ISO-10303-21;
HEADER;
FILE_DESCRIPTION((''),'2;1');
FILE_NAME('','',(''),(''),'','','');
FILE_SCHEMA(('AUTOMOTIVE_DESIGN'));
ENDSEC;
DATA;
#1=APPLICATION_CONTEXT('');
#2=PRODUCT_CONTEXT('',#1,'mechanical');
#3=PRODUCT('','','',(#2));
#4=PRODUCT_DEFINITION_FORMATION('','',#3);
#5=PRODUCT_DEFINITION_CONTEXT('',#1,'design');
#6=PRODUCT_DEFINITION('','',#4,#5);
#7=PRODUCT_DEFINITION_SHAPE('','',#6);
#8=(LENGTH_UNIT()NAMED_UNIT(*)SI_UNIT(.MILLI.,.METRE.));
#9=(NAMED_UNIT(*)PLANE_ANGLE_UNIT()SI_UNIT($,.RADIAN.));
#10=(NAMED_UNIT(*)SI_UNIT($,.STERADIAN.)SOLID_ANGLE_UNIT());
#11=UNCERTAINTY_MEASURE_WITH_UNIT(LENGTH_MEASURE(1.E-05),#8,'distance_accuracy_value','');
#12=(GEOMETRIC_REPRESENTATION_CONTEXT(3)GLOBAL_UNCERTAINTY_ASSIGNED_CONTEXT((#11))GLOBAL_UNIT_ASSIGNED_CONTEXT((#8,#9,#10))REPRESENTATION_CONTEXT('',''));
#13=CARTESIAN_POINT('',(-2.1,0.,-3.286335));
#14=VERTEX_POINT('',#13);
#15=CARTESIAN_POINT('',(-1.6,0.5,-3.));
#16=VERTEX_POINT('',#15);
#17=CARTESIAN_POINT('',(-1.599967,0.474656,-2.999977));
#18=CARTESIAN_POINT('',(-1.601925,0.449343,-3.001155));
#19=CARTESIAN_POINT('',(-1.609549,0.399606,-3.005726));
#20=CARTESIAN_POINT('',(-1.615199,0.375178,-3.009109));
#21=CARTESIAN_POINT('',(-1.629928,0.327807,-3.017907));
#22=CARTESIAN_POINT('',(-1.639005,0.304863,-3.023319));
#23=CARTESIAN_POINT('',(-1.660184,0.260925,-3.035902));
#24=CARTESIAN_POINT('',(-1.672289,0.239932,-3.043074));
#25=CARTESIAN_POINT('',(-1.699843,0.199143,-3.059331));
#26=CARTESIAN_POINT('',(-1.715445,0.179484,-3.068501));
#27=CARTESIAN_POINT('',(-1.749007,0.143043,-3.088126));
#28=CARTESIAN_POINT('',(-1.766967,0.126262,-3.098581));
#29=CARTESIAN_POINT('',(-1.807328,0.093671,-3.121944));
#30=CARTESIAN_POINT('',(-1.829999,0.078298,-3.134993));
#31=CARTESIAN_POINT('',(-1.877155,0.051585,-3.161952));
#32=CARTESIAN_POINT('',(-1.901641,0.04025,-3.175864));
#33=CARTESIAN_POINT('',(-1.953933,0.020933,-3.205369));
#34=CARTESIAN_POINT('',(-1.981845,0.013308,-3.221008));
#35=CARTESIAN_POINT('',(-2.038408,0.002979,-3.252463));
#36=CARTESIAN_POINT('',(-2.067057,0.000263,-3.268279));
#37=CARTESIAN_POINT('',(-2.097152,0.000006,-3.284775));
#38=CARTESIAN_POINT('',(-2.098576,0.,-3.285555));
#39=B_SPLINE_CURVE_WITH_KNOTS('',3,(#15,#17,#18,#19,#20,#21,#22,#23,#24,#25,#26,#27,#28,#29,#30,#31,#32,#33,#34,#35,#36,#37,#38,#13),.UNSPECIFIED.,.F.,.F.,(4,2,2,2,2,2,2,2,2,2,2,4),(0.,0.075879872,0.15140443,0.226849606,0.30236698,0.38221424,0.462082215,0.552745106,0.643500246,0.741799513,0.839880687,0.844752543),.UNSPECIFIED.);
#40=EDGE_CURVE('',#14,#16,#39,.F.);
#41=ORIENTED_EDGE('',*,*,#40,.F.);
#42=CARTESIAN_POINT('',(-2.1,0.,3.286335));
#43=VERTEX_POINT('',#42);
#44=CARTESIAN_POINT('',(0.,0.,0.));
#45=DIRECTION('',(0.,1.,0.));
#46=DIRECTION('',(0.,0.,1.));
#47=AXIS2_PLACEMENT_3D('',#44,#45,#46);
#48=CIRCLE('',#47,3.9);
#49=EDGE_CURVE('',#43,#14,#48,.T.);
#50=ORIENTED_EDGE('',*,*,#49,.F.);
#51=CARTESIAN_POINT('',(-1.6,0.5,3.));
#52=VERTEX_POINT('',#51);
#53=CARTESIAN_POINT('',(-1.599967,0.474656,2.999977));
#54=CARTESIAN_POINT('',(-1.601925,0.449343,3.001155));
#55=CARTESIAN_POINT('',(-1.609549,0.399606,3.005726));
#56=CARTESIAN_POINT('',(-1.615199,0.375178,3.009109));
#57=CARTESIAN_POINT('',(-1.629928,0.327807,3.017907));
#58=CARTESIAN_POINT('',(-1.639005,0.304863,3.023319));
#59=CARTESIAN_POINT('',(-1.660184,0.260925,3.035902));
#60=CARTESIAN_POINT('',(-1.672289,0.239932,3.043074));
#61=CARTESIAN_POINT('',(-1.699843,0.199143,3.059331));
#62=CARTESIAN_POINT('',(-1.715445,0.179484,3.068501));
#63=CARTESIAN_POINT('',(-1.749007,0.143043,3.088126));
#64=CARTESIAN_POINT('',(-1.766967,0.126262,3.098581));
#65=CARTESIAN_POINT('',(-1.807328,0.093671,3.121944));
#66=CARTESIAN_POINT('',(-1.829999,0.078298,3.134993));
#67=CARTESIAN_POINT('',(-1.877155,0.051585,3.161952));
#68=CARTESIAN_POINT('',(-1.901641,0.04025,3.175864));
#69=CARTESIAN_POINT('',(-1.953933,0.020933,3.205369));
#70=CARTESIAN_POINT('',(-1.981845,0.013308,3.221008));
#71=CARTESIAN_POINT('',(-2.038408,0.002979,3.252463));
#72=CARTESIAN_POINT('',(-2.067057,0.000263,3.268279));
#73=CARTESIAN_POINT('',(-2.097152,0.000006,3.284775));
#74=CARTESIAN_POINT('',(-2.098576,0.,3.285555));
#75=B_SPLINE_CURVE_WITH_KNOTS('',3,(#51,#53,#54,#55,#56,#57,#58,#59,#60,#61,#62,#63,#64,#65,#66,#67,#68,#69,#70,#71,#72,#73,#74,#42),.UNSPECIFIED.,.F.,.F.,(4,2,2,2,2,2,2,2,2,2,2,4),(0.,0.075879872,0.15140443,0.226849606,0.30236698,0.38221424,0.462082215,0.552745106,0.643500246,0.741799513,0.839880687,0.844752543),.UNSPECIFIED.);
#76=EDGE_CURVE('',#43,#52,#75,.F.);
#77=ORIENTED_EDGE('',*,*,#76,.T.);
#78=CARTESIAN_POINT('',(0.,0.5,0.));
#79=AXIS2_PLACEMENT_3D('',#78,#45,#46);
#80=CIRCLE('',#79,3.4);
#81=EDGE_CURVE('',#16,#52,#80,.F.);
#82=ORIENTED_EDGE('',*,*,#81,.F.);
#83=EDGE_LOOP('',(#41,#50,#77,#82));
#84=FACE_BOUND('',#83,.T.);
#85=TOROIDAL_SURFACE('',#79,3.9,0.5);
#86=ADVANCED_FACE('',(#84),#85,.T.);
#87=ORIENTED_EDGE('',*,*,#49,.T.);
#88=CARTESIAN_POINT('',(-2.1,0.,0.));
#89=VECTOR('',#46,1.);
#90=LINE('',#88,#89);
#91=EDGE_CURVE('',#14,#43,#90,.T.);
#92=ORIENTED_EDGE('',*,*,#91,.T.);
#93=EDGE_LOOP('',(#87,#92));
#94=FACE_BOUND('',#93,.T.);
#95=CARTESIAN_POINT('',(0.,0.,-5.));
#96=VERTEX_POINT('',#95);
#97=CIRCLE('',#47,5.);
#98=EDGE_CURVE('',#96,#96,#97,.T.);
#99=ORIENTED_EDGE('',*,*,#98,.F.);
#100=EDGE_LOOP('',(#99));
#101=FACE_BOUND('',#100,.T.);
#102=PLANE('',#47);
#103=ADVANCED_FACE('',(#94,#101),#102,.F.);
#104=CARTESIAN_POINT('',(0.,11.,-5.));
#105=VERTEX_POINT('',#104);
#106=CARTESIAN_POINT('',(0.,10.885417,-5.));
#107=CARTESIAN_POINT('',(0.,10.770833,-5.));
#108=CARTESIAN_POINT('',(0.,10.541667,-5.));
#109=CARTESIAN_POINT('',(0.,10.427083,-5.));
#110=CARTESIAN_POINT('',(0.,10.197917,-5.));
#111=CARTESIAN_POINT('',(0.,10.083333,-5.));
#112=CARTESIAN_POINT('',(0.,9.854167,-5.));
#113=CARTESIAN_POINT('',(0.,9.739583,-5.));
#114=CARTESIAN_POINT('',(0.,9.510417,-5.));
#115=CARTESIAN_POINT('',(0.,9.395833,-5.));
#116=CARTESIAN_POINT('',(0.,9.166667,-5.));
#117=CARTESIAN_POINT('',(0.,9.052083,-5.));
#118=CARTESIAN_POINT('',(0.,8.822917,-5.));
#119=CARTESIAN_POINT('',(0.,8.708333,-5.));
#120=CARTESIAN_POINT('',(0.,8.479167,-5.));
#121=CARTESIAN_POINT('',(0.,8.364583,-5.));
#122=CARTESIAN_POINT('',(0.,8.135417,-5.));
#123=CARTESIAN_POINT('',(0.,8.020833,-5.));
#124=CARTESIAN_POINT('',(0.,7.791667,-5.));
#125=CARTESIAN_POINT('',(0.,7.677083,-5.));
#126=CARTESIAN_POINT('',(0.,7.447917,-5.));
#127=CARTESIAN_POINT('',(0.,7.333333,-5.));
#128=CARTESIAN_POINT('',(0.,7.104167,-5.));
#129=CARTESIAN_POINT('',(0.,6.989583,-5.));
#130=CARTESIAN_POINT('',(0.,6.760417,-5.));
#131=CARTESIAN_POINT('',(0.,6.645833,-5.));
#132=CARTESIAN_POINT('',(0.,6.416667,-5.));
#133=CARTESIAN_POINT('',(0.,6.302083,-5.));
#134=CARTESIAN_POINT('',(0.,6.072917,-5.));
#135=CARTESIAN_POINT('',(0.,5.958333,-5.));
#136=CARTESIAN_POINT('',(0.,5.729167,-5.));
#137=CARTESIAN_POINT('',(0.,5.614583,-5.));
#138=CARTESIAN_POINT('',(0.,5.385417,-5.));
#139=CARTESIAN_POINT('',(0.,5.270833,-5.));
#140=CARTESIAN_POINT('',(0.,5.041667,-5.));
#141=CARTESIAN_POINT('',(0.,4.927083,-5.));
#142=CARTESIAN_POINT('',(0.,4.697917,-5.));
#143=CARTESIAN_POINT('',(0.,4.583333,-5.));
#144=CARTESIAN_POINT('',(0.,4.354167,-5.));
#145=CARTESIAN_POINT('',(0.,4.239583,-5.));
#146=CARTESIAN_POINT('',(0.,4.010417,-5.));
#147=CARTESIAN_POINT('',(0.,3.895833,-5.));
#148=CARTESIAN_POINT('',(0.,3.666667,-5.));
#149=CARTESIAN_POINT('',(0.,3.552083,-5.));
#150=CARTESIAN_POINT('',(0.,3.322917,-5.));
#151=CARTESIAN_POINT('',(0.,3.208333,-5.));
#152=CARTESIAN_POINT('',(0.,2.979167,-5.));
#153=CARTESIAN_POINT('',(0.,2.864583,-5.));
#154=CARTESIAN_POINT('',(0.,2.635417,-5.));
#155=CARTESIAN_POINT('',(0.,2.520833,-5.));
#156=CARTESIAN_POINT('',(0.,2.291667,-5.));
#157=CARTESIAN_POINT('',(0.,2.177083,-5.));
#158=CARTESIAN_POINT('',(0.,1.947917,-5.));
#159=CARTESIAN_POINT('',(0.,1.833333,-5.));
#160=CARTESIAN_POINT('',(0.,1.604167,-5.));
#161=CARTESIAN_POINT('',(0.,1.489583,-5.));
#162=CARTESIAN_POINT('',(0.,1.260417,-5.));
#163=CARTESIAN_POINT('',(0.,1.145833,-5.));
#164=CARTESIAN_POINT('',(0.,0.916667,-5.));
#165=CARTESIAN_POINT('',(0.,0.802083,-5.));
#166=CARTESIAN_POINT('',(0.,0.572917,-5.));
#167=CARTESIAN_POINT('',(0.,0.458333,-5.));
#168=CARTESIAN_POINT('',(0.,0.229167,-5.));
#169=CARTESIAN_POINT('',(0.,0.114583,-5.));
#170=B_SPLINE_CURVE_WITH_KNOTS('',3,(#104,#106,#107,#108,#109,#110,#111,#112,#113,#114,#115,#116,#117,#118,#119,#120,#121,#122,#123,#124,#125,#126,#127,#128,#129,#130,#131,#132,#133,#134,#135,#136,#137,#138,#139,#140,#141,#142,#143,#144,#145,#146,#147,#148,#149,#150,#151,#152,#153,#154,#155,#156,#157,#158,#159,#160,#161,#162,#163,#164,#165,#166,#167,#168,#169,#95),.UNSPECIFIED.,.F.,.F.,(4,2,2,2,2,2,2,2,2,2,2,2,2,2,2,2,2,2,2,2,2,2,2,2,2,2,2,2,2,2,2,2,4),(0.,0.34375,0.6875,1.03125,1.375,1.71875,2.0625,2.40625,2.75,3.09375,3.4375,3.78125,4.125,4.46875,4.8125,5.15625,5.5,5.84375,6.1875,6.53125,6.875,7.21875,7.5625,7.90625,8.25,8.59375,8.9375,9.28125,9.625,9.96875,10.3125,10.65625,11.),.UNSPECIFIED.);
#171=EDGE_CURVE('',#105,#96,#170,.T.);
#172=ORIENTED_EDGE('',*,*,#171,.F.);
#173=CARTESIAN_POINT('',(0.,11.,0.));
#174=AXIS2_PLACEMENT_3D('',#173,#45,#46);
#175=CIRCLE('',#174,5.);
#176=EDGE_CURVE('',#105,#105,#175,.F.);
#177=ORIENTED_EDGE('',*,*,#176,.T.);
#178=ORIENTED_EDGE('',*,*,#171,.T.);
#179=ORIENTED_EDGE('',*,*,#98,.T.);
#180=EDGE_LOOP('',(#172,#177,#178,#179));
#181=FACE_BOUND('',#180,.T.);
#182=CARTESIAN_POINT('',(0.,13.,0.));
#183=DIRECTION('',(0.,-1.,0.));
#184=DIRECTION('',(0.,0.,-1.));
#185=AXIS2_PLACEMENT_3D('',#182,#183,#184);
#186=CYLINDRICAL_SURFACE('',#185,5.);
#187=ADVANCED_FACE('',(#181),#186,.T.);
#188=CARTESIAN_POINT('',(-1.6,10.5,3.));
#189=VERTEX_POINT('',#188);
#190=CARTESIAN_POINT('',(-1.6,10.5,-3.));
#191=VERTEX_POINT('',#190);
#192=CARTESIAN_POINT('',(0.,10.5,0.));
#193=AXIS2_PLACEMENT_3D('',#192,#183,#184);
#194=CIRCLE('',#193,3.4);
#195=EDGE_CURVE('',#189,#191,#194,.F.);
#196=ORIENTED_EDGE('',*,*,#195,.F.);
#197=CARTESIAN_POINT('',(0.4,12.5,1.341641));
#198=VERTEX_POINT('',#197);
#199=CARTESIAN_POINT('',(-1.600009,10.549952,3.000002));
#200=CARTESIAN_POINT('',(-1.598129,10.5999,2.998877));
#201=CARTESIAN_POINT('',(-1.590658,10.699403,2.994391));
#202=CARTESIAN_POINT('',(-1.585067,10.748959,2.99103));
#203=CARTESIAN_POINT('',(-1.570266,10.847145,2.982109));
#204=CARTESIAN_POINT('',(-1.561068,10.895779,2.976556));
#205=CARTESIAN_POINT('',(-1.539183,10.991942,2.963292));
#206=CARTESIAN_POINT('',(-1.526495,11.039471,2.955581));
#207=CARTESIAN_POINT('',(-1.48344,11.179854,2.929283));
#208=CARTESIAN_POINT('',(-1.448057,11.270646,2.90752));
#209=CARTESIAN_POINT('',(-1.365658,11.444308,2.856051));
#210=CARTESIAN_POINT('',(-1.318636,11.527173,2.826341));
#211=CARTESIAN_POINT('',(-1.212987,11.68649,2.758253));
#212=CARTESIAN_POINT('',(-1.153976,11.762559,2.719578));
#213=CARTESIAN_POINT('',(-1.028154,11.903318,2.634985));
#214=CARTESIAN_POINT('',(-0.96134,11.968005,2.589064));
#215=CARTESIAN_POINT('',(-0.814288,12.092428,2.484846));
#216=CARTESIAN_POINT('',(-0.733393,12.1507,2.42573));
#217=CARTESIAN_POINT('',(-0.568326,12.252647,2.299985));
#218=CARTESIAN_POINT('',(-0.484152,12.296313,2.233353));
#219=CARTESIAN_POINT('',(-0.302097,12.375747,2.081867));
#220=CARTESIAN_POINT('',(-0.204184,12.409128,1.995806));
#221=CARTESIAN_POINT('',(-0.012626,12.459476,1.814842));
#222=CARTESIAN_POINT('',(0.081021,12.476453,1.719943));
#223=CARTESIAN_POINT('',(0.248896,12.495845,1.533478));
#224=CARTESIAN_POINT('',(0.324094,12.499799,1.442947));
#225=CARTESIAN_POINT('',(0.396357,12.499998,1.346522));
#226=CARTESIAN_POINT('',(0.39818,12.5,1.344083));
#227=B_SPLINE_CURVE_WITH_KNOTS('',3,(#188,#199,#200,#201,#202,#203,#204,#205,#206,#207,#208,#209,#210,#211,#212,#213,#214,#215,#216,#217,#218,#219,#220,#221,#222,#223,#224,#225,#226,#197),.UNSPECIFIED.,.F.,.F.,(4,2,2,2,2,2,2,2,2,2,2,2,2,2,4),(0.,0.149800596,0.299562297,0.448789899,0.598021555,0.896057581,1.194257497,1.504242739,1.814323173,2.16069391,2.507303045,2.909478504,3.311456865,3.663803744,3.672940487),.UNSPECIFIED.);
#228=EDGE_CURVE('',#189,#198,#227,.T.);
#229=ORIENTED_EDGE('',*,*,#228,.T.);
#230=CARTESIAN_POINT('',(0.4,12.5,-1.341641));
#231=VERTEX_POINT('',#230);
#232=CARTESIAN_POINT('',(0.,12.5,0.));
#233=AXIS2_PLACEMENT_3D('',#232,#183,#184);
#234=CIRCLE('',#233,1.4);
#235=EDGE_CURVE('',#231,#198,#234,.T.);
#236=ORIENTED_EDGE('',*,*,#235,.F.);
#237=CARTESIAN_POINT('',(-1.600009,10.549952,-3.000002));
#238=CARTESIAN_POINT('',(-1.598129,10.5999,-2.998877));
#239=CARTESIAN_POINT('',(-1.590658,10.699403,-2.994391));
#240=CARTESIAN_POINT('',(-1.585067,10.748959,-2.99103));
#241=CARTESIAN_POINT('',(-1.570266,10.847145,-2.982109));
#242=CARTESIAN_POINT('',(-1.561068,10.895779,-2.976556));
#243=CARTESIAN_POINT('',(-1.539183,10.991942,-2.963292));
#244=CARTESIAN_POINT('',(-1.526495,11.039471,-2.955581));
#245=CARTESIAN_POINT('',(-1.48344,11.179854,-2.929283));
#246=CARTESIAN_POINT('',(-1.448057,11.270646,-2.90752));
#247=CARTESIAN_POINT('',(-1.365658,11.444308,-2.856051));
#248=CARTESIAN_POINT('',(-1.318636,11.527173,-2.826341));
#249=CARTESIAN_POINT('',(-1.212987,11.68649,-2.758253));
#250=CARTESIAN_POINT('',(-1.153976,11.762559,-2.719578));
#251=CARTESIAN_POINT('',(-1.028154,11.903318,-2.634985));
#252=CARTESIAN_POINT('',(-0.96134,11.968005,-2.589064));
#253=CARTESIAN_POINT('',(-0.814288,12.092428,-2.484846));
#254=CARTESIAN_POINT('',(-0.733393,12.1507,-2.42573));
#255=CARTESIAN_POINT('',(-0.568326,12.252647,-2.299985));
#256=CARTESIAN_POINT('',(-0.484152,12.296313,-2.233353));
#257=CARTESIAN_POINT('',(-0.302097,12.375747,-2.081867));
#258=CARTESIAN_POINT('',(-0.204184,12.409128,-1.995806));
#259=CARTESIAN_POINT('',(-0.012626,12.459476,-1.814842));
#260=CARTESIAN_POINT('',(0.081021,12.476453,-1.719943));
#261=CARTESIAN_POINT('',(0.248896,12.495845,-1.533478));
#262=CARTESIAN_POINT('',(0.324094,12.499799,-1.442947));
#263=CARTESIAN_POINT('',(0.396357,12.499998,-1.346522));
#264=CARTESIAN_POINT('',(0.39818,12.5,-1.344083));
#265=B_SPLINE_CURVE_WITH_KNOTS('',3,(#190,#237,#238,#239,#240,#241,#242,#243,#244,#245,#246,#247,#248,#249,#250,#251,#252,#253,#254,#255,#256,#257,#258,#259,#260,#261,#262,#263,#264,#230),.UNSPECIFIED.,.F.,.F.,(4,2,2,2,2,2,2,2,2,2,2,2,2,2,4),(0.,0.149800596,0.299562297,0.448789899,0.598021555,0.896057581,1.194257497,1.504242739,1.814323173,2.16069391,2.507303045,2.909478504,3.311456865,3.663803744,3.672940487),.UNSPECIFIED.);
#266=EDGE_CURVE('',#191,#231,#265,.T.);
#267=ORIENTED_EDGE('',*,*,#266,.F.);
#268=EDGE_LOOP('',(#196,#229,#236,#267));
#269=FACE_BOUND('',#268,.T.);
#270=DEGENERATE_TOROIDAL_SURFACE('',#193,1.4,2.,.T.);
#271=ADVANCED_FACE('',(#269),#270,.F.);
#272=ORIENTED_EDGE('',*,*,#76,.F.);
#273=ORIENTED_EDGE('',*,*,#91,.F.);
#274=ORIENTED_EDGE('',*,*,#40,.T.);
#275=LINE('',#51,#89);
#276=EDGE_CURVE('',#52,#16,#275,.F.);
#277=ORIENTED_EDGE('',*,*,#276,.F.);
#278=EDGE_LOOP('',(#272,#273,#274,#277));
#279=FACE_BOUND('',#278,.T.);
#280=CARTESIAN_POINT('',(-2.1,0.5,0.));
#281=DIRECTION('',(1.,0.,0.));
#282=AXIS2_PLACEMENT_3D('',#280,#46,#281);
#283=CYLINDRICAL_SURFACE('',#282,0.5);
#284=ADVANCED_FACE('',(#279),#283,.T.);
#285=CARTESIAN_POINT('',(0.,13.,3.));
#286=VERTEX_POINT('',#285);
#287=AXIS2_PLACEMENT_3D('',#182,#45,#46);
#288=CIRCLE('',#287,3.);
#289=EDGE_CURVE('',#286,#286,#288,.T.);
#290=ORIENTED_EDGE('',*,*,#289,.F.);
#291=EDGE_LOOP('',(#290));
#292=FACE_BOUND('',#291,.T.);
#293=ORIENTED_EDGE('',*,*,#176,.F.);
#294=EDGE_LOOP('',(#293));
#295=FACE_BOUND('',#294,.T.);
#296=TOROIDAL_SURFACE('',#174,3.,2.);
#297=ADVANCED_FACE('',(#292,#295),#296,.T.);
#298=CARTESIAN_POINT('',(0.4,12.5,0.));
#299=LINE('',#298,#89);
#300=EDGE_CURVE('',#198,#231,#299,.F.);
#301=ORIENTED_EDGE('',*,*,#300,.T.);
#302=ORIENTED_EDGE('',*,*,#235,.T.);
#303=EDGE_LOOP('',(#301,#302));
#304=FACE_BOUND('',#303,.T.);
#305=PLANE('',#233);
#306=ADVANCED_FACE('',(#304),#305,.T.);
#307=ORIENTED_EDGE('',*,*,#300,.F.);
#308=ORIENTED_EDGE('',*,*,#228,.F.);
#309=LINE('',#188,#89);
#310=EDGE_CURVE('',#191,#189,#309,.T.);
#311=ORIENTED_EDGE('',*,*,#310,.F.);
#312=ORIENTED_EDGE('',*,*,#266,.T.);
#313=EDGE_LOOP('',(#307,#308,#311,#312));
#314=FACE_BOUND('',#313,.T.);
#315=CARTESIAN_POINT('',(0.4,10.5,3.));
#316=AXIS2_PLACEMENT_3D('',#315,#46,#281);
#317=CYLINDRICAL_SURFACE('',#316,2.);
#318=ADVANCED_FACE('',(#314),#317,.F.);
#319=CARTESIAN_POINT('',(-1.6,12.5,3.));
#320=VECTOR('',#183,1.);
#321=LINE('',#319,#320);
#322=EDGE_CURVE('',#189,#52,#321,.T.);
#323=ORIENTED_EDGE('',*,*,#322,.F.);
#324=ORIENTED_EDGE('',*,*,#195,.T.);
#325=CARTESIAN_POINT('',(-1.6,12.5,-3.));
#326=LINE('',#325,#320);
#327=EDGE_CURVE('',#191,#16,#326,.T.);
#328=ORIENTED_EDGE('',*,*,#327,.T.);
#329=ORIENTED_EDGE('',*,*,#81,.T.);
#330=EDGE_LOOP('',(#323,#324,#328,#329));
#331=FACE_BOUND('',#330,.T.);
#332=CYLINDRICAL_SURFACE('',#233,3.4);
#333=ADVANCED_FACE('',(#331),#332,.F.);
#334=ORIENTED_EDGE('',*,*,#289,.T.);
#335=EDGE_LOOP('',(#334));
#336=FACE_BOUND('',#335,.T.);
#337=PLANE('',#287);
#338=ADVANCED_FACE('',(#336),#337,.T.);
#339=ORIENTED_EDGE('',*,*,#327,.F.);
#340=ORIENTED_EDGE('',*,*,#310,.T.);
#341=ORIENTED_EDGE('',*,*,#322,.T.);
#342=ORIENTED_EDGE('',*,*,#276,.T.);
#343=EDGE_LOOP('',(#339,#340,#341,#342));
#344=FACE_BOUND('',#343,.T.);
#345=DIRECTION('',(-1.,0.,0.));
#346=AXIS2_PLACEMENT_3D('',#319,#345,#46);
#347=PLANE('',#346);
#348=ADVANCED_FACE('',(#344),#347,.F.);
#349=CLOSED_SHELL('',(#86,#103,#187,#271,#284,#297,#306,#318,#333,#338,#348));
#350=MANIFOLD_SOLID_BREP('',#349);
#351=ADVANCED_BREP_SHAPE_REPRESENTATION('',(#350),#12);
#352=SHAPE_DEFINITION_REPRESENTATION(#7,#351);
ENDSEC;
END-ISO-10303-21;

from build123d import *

# Parameters (mm, degrees)
SKETCH1_R           = 5
BOSS_EXTRUDE1_DEPTH = 13
CUT_EXTRUDE1_DEPTH  = 12.5
FILLET4_R           = 2
FILLET5_R           = 0.5
ROUND_BODY_R        = 2


with BuildPart() as part:
    # Sketch1 → Boss-Extrude1 (new body)
    with BuildSketch(Plane(origin=(0, 0, 0), x_dir=(1, 0, 0), z_dir=(0, 1, 0))):
        with Locations(Location((0, 0, 0), (0, 0, 90))):
            Circle(SKETCH1_R)
    extrude(amount=BOSS_EXTRUDE1_DEPTH)

    # Insert → Cut-Extrude1 (cut)
    with BuildSketch(Plane.XZ):
        with BuildLine():
            Line((-1.6, 3), (-1.6, -3))
            ThreePointArc((-1.6, -3), (3.4, 0), (-1.6, 3))
        make_face()
    extrude(amount=-CUT_EXTRUDE1_DEPTH, mode=Mode.SUBTRACT)

    # Fillet4
    # the kernel refuses this fillet: 2 mm, written as the material it adds along each edge
    with BuildSketch(Plane(origin=(0, 12.5, 0), x_dir=(-0.9999950652018581, 0, -0.003141587485880304), z_dir=(-0.003141587485880304, 0, 0.9999950652018581))) as fillet4_piece_1:
        with BuildLine():
            CenterArc((3.4 - FILLET4_R, FILLET4_R), FILLET4_R, 270, 90)
            Line((3.4 - FILLET4_R, 0), (3.4, 0))
            Line((3.4, 0), (3.4, FILLET4_R))
        make_face()
    revolve(axis=Axis((0, 12.5, 0), (0, -1, 0)), revolution_arc=359.64)
    with BuildSketch(Plane(origin=(-1.6, 12.5, 8), x_dir=(0, -1, 0), z_dir=(0, 0, -1))) as fillet4_piece_2_section:
        with BuildLine():
            CenterArc((FILLET4_R, -FILLET4_R), FILLET4_R, 90, 90)
            Line((0, -FILLET4_R), (0, 0))
            Line((0, 0), (FILLET4_R, 0))
        make_face()
    fillet4_piece_2 = extrude(amount=16, mode=Mode.PRIVATE)
    fillet4_piece_2 = fillet4_piece_2 & Plane(origin=(0, 12.061767945, 0), x_dir=(-0.4705882352941176, 0, -0.8823529411764707), z_dir=(0, -1, 0)) * Cylinder(3.4, 40, mode=Mode.PRIVATE)
    add(fillet4_piece_2)

    # Fillet5
    fillet5_edges = [part.edges().sort_by_distance(p)[0] for p in [
        (3.4, 0, 0),
        (-1.6, 0, 0),
    ]]
    fillet(fillet5_edges, radius=FILLET5_R)

    # Round Body
    round_body_edges = [part.edges().sort_by_distance(p)[0] for p in [
        (0, 13, 5),
    ]]
    fillet(round_body_edges, radius=ROUND_BODY_R)


solid = part.part
